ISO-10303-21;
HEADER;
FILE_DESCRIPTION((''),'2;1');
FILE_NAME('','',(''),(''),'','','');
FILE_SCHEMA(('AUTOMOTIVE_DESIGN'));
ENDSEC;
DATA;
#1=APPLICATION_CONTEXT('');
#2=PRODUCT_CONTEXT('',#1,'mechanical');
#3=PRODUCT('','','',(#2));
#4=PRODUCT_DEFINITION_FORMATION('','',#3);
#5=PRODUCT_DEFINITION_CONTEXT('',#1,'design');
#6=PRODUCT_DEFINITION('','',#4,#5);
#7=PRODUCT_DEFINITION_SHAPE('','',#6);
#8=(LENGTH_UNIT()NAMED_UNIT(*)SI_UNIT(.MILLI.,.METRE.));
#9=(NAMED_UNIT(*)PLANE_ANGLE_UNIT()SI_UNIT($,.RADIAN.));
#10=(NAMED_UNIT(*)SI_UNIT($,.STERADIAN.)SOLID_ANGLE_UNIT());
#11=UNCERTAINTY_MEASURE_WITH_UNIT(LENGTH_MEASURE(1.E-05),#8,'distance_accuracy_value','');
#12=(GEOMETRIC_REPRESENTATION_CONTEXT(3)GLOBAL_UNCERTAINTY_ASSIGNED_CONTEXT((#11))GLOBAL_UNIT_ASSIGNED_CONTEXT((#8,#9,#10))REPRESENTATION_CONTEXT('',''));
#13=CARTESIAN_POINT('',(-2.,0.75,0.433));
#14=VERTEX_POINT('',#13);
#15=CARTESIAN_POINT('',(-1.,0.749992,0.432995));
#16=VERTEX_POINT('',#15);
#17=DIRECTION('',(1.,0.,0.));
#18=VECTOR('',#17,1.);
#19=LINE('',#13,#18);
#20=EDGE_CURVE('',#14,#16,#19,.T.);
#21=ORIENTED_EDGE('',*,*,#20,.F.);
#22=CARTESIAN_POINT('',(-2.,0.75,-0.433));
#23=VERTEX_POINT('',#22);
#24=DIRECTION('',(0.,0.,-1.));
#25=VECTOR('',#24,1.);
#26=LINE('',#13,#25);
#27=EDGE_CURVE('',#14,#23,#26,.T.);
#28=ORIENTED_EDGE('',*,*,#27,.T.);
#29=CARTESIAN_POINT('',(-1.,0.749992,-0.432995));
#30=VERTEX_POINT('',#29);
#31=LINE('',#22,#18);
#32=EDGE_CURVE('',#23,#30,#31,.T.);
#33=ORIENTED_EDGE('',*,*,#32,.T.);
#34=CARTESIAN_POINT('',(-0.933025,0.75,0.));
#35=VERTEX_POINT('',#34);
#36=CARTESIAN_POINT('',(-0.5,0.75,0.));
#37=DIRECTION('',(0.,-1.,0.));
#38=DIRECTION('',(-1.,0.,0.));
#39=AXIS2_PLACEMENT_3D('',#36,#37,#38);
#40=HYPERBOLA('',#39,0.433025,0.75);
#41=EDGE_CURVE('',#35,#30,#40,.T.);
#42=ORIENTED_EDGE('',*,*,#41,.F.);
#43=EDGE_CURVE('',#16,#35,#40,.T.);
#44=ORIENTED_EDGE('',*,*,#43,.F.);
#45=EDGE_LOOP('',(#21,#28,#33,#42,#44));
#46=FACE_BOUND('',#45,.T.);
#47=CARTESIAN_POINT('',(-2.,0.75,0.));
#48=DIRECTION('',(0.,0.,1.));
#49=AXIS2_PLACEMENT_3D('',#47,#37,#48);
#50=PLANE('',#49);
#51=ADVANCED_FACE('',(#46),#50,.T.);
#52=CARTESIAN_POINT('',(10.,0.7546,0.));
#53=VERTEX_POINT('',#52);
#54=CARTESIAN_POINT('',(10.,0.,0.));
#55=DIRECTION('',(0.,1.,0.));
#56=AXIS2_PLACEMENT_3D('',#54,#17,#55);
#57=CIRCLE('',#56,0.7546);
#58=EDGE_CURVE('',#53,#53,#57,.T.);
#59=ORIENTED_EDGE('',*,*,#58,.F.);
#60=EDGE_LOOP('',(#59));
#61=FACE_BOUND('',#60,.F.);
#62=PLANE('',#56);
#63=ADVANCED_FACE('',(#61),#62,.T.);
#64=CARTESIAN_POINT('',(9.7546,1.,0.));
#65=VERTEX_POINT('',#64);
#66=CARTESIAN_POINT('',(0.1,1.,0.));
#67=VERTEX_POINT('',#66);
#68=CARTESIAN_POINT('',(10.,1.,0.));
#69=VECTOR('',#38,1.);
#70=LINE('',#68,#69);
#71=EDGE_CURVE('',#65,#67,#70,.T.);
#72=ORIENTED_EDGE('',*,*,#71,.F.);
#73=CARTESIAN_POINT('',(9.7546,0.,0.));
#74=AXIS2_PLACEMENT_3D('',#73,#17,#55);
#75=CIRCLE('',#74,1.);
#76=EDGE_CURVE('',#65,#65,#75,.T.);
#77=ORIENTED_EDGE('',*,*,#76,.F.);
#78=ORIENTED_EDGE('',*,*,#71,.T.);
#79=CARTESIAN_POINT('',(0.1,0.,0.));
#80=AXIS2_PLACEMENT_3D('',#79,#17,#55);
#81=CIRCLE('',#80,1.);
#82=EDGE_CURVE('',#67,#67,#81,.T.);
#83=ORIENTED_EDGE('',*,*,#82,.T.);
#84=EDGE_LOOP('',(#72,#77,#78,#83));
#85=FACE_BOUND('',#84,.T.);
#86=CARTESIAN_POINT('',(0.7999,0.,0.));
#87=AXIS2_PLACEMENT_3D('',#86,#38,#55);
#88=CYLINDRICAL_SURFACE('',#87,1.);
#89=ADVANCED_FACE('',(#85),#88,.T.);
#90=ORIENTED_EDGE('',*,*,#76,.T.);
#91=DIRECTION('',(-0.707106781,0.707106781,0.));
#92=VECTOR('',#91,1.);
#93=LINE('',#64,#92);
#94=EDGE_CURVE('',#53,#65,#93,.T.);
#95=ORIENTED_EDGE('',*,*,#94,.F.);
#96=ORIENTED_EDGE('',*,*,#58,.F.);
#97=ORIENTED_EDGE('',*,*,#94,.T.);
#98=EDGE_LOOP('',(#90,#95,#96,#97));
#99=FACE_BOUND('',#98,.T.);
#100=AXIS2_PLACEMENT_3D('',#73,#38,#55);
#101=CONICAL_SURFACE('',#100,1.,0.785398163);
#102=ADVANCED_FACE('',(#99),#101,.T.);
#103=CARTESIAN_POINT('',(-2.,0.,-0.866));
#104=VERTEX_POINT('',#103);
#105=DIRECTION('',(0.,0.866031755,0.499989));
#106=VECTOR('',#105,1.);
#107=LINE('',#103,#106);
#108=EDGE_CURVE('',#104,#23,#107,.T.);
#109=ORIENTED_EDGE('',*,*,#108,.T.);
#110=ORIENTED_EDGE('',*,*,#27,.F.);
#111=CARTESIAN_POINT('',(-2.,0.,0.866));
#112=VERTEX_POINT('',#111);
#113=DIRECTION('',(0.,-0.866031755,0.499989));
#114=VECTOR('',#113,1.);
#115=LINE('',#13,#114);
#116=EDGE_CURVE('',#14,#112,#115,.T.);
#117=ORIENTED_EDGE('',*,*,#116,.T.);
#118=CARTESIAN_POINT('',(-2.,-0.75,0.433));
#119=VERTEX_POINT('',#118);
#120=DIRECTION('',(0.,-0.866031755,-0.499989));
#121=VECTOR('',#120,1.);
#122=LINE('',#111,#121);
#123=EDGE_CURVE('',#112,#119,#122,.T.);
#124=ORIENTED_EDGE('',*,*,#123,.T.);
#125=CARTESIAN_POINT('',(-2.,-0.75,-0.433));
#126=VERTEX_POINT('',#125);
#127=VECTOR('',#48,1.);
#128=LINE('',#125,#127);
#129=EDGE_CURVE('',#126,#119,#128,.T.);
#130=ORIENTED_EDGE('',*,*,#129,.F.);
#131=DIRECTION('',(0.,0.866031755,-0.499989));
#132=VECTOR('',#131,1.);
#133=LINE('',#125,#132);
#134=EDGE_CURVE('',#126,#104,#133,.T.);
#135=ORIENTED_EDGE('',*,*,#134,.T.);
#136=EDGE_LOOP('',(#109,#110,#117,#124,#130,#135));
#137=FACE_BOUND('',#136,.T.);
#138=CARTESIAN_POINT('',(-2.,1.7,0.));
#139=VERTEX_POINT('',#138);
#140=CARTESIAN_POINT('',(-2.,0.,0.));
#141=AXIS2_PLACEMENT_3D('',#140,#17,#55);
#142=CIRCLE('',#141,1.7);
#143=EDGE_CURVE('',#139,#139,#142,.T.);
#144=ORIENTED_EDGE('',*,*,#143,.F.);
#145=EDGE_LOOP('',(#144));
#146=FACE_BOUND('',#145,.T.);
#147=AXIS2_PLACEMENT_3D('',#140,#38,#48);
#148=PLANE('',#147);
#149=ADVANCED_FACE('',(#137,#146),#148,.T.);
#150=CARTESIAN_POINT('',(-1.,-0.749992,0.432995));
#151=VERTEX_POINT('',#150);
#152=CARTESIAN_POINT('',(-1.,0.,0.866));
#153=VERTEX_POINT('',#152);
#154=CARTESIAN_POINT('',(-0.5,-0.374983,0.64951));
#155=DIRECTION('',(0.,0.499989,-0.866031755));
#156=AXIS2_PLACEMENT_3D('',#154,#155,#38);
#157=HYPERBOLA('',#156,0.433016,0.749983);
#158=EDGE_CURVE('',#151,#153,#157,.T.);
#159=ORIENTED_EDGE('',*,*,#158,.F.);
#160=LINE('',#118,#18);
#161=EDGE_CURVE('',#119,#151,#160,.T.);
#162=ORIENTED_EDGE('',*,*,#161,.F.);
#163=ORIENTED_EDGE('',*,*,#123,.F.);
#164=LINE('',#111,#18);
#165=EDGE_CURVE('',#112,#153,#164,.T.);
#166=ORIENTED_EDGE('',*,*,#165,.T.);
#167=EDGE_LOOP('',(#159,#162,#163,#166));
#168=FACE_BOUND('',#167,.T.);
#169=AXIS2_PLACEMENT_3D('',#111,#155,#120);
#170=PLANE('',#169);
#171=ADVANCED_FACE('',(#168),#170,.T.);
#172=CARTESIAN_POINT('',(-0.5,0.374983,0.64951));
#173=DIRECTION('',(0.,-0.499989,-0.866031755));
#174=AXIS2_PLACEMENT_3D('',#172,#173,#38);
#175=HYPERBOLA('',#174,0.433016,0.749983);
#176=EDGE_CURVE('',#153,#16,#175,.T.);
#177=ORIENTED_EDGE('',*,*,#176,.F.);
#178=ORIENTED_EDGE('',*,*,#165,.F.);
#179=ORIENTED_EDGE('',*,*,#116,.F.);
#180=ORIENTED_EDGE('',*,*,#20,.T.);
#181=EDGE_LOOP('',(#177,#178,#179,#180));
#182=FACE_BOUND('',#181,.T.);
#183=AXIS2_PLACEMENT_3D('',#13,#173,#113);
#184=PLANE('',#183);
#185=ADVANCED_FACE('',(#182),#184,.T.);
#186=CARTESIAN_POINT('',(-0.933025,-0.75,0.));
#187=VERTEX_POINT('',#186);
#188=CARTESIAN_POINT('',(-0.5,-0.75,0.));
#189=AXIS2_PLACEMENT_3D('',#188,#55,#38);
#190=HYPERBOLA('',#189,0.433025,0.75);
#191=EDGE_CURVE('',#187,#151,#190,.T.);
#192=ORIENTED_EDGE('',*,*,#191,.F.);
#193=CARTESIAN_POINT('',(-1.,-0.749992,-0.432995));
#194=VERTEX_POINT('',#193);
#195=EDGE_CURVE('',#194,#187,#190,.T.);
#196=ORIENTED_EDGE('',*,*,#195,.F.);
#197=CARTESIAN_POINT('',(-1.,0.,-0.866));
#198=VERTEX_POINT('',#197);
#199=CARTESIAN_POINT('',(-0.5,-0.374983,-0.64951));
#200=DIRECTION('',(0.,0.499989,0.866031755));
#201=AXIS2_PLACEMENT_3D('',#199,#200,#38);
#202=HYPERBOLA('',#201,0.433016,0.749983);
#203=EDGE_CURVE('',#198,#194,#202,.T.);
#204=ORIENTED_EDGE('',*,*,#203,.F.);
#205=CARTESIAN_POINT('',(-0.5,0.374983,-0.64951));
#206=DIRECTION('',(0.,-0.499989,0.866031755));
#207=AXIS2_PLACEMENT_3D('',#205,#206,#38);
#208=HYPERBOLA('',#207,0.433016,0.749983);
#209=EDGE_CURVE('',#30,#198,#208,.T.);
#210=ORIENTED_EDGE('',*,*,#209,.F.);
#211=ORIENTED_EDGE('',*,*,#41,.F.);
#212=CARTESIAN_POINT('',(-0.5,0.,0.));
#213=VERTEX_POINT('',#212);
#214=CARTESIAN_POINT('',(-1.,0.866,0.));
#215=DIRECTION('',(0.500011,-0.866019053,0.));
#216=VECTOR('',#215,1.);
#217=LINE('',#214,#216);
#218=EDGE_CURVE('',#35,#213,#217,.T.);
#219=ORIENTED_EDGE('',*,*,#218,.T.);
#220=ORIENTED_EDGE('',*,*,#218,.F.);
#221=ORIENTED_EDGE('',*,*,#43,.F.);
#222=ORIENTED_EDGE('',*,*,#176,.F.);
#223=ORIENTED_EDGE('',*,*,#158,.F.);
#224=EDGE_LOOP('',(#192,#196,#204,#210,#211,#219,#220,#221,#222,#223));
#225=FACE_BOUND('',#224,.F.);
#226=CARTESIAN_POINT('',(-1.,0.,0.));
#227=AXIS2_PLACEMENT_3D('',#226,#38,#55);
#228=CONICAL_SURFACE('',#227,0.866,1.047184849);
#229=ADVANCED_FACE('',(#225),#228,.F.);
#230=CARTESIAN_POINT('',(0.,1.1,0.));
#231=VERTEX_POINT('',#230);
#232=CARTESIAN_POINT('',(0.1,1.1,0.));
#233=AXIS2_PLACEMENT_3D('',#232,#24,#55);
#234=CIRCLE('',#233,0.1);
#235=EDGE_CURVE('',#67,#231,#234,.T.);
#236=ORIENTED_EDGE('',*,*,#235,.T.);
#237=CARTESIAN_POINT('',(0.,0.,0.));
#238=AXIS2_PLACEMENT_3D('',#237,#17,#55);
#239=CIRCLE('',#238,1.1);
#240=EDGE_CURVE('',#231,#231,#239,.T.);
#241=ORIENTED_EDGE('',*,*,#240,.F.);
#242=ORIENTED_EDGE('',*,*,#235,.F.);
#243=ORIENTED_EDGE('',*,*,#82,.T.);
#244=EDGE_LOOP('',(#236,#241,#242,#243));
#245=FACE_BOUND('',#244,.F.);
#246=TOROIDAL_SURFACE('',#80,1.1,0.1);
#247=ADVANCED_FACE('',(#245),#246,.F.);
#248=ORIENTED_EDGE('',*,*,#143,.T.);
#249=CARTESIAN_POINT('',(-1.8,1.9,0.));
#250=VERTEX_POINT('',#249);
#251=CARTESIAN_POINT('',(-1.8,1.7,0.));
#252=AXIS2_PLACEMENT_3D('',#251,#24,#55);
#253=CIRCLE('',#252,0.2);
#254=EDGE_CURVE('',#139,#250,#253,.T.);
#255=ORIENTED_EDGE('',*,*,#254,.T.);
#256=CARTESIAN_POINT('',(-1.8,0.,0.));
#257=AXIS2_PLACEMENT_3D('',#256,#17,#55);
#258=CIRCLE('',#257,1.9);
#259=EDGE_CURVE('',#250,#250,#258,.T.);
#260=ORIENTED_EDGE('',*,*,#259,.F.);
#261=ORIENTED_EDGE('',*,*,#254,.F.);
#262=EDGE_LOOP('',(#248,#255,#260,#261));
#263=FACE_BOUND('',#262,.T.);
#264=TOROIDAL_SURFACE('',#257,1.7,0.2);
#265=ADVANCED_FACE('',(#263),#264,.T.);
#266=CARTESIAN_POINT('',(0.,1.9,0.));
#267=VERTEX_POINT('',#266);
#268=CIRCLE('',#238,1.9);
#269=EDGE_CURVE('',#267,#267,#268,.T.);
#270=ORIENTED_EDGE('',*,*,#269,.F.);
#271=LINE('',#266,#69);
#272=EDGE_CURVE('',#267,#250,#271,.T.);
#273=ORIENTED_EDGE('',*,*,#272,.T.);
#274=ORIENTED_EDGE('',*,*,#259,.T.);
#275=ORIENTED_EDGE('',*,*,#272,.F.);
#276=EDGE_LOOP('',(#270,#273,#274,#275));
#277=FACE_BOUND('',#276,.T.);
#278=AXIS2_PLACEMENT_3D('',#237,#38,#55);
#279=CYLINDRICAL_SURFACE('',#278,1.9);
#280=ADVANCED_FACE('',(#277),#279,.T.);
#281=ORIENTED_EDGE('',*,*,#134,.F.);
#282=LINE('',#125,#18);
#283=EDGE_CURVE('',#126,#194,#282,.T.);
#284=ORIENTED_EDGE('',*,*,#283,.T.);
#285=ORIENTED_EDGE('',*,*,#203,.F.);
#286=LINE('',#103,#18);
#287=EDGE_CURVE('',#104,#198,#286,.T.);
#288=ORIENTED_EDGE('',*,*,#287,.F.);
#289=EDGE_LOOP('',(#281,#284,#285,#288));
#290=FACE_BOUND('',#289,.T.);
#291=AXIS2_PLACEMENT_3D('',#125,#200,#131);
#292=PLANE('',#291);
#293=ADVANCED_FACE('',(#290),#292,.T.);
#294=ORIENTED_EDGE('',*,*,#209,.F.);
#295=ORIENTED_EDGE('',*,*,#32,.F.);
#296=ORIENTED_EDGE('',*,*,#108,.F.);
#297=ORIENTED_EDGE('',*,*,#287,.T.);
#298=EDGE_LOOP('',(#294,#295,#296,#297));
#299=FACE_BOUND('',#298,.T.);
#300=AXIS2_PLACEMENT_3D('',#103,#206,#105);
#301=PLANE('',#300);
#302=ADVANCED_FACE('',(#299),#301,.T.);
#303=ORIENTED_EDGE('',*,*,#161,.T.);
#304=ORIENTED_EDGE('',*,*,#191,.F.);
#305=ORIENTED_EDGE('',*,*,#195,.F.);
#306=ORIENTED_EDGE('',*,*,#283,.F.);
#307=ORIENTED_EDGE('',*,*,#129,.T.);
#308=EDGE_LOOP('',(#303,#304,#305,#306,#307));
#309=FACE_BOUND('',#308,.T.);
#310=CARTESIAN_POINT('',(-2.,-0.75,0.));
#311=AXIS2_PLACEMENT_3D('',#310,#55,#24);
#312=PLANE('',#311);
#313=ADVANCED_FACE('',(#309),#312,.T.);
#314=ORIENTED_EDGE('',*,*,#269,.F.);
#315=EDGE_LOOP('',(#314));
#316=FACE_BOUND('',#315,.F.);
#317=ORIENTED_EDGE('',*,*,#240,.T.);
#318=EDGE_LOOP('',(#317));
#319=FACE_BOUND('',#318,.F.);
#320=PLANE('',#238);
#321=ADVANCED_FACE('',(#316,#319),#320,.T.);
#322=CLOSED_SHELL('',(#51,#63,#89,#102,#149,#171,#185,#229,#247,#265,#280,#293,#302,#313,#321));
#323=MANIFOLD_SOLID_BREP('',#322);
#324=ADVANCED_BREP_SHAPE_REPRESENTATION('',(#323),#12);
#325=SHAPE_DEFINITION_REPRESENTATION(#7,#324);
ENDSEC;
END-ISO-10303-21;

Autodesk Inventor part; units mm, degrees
ref_plane "YZ Plane" through (0, 0, 0) normal (1, 0, 0) x (0, 1, 0)
ref_plane "XZ Plane" through (0, 0, 0) normal (0, 1, 0) x (-1, 0, 0)
sketch "Sketch1" plane through (0, 0, 0) normal (0, 0, 1) x (1, 0, 0)
  line L0 (-0.5, 0) -> (10, 0)
  line L1 (10, 0) -> (10, 1)
  line L2 (10, 1) -> (1.0454, 1)
  line L3 (1.0454, 1) -> (0.7999, 1)
  line L4 (0.7999, 1) -> (0, 1)
  line L5 (0, 1) -> (0, 1.9)
  line L6 (0, 1.9) -> (-2, 1.9)
  line L7 (-2, 1.9) -> (-2, 0.866)
  line L8 (-2, 0.866) -> (-1, 0.866)
  line L9 (-1, 0.866) -> (-0.5, 0)
  line L10 (-4.4, 0) -> (12.4, 0) projected
  line L11 (0, -0.38) -> (0, 2.28) projected
  line L12 (1.0454, 1) -> (0, 1) construction
  dimension "d1" = 8.9546
  dimension "d2" = 0.2455
  dimension "d3" = 2
  dimension "d4" = 1
  dimension "d5" = 60
  dimension "d6" = 2
  dimension "d7" = 2
  dimension "d8" = 1.7321
  dimension "d9" = 3.8
  dimension "d26" = 10
revolve "Body" add sketch "Sketch1" angle 360 about axis through (-0.5, 0, 0) along (1, 0, 0)
sketch "Sketch2" plane through (-2, 0, 0) normal (-1, 0, 0) x (0, 0, 1)
  circle A0 centre (0, 0) radius 0.866 projected
  line L0 (0, -2.66) -> (0, 2.66) projected
  line L1 (-2.66, 0) -> (2.66, 0) projected
  line L2 (0.866, 0) -> (0.433, -0.75)
  line L3 (0.433, -0.75) -> (-0.433, -0.75)
  line L4 (-0.433, -0.75) -> (-0.866, 0)
  line L5 (-0.866, 0) -> (-0.433, 0.75)
  line L6 (-0.433, 0.75) -> (0.433, 0.75)
  line L7 (0.433, 0.75) -> (0.866, 0)
  point P0 (0, 0)
extrude "Slot" add sketch "Sketch2" against normal up to next contours L7 A0 | A0 L2 | L6 L0 A0 | A0 L0 L3 | L0 L6 A0 | A0 L3 L0 | L4 A0 | A0 L5
fillet "Fillet1" radius 0.2 1 edges at (-2, -1.9, 0)
thread "Thread" size "M2x0.4" class "6g" standard "ISO Metric profile" length 8.9546
chamfer "Chamfer1" distance 0.2454 distance2 0.2454 1 edges at (10, -1, 0) measured on face at (10, -0.5392, -0.3309)
ref_plane "Work Plane1" through (29, 0, 0) normal (0, -1, 0) x (1, 0, 0)
fillet "Fillet2" radius 0.1 1 edges at (0, -1, 0)
equation "\"d1\" = GEL"
equation "\"d3\" = KOH"
equation "\"d4\" = INTI"
equation "\"d6\" = GD"
equation "\"d7\" = BDM"
equation "\"d8\" = 1.1547 * SW"
equation "\"d9\" = KOD"
equation "\"d26\" = NLG"
equation "\"d30\" = R"
equation "\"d17\" = RR"
equation "\"d13\" = GEL"
equation "\"d15\" = -0.5 * SPD + 0.5 * GD"
equation "\"d16\" = GUL"
equation "\"GD\" = NND"
equation "\"NLG\" = 10"
equation "\"GEL\" = 8.95462"
equation "\"KOD\" = 3.8"
equation "\"KOH\" = 2"
equation "\"INTI\" = 1"
equation "\"GAL\" = 0.61345 * PTC"
equation "\"GUL\" = 0.61345 * PTC"
equation "\"BDM\" = NND"
equation "\"SW\" = 1.5"
equation "\"RR\" = 0.2"
equation "\"SPD\" = 1.50924"
equation "\"R\" = 0.1"
equation "\"TOA\" = 30deg"
equation "\"THREADDIA\" = 2"
equation "\"PTC\" = 0.4"
equation "\"NND\" = 2"
equation "\"E0\" = 1.155 * SW"
equation "\"GD1\" = THREADDIA - 1.2269 * PTC"
properties part number "ANSI B18.3.1M - M2x0.4 x 10, FSHCSM" material "Steel, Mild"
